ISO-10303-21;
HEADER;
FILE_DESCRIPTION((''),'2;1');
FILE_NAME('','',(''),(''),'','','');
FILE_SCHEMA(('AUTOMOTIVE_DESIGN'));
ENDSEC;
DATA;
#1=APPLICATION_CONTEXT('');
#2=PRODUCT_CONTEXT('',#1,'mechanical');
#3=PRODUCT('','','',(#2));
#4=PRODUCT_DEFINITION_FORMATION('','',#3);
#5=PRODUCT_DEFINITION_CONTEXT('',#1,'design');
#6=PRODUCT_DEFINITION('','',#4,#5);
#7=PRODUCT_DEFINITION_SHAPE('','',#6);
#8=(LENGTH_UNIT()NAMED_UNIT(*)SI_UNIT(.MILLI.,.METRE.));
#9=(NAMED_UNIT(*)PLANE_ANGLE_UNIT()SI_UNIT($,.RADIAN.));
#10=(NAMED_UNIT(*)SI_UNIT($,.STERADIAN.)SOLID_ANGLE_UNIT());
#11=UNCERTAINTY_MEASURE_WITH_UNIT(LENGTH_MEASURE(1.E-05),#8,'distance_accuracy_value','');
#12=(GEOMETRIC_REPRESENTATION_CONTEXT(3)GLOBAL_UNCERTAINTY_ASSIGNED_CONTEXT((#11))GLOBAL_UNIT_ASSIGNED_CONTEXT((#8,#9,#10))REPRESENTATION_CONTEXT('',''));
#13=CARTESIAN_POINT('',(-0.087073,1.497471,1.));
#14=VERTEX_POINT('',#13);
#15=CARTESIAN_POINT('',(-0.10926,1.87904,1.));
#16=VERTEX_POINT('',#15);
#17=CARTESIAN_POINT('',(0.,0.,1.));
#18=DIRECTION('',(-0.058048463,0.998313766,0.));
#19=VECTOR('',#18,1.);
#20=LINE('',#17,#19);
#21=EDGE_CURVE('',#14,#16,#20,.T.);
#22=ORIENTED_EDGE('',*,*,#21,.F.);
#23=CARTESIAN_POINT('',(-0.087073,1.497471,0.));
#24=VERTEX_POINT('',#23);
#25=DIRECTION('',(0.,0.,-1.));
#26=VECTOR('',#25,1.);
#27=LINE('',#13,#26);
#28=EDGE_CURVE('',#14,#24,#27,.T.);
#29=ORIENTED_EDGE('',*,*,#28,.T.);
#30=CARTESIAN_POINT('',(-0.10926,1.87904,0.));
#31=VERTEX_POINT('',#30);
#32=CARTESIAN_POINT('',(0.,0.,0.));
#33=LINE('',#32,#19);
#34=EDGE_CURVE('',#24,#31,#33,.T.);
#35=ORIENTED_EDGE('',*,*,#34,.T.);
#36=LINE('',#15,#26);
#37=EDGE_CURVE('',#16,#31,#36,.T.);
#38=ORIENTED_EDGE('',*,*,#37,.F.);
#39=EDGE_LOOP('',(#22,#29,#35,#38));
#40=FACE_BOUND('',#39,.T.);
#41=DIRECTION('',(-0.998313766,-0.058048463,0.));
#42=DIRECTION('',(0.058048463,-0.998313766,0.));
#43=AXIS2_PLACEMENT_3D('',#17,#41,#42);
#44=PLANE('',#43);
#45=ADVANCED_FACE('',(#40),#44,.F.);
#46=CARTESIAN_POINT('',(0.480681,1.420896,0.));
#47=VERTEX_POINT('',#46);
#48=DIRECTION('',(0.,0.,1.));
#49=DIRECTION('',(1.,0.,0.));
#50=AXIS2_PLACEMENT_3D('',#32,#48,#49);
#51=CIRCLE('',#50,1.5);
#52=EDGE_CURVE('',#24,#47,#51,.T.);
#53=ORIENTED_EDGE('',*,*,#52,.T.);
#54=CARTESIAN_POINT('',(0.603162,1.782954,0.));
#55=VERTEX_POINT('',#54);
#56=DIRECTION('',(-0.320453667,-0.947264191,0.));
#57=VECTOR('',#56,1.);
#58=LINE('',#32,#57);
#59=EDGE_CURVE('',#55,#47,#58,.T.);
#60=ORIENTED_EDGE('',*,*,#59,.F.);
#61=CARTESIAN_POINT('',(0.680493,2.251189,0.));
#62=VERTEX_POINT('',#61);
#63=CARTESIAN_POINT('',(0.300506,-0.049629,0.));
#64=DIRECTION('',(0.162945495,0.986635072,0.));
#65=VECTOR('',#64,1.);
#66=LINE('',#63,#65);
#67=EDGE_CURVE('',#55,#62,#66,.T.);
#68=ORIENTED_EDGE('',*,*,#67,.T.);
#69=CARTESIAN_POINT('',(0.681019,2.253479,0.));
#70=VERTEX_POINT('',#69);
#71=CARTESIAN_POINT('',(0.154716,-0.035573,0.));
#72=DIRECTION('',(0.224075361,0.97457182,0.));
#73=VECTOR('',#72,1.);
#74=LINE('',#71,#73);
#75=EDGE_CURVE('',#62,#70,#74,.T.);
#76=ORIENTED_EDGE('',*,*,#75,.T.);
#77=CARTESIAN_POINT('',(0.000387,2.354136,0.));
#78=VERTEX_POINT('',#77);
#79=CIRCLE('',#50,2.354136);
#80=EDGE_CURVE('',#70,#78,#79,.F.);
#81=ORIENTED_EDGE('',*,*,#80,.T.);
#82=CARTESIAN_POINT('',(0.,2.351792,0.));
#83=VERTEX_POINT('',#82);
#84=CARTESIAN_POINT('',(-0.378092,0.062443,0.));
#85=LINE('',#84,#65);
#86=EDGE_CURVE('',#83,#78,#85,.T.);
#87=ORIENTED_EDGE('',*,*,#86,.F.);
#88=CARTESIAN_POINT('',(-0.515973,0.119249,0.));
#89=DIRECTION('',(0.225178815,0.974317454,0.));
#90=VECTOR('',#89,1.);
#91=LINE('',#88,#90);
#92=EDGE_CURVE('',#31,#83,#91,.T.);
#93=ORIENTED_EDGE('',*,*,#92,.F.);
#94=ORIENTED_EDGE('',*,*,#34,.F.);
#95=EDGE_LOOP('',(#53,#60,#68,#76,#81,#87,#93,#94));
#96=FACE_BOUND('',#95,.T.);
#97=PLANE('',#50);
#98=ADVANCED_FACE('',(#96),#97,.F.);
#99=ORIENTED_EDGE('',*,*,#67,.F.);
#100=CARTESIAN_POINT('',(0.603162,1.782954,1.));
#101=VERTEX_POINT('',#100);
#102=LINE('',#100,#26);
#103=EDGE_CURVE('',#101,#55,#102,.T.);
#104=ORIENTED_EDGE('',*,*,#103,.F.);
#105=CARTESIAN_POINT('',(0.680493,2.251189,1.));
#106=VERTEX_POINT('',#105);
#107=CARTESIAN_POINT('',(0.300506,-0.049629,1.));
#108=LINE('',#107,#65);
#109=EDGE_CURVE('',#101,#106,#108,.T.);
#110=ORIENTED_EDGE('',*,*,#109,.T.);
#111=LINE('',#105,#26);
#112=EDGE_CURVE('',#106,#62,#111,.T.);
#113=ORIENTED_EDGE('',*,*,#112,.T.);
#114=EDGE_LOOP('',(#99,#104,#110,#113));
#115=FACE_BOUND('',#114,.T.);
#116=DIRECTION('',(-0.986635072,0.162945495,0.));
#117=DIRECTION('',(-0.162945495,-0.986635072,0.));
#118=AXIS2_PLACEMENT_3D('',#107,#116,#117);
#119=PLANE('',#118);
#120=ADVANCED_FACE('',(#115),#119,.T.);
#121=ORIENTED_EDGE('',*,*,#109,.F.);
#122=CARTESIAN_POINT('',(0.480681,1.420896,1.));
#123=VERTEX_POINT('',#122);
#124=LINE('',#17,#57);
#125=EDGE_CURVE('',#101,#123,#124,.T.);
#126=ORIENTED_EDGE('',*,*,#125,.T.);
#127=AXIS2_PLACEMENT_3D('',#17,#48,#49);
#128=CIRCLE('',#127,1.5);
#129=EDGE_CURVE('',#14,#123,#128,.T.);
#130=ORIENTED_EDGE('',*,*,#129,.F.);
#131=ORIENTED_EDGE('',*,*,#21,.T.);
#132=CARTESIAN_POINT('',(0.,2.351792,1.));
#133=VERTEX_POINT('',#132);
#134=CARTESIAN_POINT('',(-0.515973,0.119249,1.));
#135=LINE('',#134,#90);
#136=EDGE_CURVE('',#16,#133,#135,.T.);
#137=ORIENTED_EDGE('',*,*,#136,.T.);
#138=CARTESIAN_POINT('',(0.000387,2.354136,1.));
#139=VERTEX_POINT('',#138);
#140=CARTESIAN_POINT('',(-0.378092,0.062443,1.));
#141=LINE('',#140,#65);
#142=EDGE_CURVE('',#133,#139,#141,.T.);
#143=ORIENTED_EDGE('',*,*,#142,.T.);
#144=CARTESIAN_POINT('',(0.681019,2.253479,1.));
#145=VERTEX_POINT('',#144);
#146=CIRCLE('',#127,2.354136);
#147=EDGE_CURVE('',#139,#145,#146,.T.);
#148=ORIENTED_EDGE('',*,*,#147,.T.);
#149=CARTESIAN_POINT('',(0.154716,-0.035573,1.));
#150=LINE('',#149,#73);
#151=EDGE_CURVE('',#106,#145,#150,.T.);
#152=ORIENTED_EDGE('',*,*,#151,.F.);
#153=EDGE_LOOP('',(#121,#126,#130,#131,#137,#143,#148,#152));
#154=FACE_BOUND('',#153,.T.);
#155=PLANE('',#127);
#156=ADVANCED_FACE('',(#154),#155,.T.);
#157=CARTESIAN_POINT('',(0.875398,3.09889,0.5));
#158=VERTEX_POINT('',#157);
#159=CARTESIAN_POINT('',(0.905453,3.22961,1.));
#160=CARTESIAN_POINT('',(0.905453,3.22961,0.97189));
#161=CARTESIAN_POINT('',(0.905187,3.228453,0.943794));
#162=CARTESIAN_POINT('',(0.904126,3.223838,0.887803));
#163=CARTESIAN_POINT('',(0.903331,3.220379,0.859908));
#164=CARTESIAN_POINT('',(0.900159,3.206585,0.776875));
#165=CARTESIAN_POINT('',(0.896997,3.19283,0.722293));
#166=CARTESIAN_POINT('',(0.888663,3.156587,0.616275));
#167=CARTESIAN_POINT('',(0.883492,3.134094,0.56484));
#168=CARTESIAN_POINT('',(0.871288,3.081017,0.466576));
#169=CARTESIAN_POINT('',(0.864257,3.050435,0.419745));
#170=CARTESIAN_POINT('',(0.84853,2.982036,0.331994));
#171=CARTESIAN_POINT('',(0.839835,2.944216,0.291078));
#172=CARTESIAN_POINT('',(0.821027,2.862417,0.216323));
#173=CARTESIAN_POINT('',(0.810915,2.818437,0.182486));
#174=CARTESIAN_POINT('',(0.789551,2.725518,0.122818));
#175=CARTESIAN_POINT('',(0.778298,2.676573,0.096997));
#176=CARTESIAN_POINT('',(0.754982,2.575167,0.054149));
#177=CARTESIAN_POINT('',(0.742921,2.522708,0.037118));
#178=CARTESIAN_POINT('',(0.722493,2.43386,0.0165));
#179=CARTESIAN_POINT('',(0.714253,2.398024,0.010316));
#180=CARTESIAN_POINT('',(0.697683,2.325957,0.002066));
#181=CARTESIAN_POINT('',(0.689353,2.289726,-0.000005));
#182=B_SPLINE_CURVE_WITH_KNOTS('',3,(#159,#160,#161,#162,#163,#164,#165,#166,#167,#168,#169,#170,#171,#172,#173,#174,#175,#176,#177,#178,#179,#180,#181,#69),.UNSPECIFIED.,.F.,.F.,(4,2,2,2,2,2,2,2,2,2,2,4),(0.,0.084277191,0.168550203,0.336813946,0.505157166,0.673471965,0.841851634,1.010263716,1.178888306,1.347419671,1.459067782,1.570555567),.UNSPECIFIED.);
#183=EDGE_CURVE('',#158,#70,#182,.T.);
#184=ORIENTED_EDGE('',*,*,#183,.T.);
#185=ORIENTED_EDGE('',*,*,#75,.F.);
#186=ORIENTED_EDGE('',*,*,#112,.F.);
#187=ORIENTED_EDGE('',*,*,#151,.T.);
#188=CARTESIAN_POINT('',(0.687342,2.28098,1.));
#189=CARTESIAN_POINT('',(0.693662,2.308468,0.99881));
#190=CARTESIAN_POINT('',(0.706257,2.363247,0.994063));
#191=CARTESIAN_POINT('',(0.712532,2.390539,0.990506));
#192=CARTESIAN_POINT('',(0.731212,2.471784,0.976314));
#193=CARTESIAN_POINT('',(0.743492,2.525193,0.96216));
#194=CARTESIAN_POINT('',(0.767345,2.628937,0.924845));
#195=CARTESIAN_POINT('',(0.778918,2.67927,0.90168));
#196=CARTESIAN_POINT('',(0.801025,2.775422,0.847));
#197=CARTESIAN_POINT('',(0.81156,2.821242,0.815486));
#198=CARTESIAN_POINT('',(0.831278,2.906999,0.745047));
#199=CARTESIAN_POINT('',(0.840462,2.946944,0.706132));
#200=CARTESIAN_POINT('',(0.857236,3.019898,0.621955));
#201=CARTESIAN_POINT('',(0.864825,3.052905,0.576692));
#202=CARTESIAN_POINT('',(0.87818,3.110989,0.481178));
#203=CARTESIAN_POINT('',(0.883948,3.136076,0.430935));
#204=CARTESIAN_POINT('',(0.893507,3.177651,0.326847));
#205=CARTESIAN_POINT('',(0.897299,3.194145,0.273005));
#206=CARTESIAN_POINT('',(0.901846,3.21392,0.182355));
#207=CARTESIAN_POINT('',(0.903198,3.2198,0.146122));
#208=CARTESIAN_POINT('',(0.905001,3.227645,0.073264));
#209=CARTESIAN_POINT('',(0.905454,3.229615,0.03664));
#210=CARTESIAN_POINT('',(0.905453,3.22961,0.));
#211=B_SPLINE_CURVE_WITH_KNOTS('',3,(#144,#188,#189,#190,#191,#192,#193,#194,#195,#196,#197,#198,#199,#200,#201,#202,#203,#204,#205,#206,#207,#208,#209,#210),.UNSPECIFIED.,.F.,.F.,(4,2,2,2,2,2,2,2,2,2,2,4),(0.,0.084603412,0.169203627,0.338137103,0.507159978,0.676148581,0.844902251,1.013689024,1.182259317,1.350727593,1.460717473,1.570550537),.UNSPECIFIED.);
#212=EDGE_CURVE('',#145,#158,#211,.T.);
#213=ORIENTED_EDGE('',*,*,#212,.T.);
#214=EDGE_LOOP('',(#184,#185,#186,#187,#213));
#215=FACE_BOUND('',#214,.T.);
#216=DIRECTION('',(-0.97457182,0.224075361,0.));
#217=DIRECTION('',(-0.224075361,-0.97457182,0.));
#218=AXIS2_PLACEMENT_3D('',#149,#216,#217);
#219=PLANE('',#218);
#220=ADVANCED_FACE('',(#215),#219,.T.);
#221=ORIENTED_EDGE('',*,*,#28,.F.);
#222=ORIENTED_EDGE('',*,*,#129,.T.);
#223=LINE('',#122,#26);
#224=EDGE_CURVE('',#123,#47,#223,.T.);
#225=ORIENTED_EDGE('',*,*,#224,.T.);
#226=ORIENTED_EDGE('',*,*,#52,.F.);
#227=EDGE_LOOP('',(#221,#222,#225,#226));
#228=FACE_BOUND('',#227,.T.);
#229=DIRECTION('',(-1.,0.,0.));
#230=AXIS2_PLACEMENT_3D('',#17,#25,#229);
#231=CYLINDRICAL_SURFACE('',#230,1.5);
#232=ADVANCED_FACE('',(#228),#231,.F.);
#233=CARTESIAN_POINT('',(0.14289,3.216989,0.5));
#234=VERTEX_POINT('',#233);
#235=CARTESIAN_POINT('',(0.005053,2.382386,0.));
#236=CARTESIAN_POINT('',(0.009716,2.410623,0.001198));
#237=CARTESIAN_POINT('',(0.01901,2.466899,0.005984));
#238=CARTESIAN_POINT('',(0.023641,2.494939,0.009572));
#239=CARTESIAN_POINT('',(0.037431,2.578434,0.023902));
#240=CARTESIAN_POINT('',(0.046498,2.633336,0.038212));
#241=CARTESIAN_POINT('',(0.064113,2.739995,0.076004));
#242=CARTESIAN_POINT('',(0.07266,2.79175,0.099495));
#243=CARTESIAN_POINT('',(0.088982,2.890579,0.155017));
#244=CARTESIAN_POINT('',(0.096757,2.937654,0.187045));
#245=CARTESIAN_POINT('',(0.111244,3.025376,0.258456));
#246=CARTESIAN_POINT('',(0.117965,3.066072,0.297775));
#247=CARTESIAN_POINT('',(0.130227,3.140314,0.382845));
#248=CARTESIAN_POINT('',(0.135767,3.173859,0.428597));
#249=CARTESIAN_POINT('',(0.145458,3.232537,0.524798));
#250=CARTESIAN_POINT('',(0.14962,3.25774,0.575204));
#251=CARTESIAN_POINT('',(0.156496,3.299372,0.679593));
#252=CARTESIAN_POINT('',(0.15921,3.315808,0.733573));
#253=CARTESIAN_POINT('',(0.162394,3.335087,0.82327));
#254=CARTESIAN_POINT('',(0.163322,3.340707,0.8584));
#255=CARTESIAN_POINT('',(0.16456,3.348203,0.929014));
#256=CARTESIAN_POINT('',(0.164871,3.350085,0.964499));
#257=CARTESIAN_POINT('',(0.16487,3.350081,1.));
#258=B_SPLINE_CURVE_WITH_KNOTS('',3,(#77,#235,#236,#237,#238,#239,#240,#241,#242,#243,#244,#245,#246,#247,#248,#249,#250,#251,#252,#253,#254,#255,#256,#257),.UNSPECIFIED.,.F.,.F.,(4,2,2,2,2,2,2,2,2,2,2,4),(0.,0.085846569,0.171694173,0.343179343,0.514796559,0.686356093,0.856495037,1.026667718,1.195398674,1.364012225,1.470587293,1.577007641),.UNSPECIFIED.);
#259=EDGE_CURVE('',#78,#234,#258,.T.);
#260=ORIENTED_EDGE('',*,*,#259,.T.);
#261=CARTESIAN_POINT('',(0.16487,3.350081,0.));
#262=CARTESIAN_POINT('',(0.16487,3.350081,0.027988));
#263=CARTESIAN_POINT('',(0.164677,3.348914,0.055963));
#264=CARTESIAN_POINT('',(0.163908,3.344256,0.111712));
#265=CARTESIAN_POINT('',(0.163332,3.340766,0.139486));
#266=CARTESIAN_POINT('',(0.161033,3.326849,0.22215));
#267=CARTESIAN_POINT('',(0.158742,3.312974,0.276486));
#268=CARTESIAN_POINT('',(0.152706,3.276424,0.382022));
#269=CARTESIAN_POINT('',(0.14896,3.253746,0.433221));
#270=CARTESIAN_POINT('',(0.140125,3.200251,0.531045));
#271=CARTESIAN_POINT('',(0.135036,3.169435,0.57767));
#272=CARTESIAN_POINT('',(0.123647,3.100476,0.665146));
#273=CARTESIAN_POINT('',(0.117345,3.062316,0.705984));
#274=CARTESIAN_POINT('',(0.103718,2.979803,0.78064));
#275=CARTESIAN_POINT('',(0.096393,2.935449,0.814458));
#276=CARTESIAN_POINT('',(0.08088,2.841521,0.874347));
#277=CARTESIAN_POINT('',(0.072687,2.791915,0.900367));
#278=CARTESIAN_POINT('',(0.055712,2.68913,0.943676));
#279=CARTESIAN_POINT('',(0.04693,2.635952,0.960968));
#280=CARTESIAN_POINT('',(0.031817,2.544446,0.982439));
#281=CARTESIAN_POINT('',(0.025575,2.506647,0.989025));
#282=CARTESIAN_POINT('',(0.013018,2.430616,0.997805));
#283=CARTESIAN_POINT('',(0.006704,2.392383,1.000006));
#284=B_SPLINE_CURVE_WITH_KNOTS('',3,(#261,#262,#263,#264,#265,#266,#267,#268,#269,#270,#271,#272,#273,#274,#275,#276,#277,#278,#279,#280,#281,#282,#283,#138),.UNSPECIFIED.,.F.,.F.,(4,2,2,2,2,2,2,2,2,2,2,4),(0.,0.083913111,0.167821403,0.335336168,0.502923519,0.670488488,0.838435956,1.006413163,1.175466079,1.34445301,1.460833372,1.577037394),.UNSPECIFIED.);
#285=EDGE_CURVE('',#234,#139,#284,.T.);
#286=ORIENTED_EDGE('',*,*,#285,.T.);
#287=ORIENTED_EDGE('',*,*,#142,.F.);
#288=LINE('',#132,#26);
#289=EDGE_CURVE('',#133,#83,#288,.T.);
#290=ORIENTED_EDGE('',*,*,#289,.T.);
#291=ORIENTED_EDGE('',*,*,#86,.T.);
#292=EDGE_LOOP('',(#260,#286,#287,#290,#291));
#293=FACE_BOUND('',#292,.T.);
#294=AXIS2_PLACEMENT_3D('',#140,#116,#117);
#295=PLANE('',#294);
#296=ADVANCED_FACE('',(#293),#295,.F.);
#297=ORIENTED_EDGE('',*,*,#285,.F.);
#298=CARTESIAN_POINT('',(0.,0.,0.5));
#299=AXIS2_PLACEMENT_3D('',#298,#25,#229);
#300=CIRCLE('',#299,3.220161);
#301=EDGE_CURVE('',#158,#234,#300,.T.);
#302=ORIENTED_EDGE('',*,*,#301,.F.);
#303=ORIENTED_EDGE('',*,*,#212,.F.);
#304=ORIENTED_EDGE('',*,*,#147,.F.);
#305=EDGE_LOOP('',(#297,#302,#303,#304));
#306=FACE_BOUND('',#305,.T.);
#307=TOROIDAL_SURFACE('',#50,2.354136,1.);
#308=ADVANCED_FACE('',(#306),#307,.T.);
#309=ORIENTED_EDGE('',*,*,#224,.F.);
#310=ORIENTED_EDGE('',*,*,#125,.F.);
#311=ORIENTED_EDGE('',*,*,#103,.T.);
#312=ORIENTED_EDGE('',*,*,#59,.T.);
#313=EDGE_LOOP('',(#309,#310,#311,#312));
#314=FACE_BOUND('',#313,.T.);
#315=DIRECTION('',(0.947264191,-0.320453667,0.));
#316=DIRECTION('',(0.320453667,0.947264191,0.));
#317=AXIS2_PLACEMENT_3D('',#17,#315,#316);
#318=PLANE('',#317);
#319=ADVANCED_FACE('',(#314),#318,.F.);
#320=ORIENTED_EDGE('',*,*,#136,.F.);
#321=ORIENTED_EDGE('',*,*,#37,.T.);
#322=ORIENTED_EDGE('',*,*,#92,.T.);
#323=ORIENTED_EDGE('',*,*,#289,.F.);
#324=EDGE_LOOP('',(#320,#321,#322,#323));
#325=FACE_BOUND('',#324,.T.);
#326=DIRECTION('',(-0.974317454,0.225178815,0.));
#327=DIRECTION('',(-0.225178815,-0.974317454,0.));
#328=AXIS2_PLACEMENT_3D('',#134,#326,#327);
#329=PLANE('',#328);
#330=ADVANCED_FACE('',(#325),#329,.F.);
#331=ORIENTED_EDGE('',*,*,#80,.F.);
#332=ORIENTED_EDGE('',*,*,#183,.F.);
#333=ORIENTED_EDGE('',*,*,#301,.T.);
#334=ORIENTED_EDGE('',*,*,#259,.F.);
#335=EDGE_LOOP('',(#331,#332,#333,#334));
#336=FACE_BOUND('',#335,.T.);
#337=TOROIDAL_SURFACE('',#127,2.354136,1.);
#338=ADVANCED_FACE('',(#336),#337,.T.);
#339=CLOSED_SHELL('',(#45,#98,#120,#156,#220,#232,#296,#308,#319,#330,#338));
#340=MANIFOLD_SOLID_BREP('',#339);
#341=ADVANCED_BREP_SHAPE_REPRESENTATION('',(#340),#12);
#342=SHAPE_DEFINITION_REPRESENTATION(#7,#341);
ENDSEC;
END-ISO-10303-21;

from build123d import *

# Parameters (mm, degrees)
EXTRUDE_1_DEPTH = 1
FILLET_4_R      = 1


with BuildPart() as part:
    # Эскиз1 → Бобышка-Вытянуть1 (new body)
    with BuildSketch(Plane.XY):
        with BuildLine():
            ThreePointArc((0.480680501, 1.420896286), (-0.200493603, -1.486540385), (-0.087072694, 1.497470649))
            Line((-0.087072694, 1.497470649), (-0.109259646, 1.879040442))
            Line((-0.109259646, 1.879040442), (0, 2.351791755))
            Line((0, 2.351791755), (0.164870261, 3.350081286))
            ThreePointArc((0.164870261, 3.350081286), (-2.42932337, -2.312707243), (3.35413578, 0))
            ThreePointArc((3.35413578, 0), (2.672755085, 2.02647652), (0.905453106, 3.229610116))
            Line((0.905453106, 3.229610116), (0.680492814, 2.251189461))
            Line((0.680492814, 2.251189461), (0.603162473, 1.782954201))
            Line((0.603162473, 1.782954201), (0.480680501, 1.420896286))
        make_face()
    extrude(amount=EXTRUDE_1_DEPTH)

    # Скругление4
    # the kernel refuses this fillet: 1 mm, written as the material it takes off along each edge
    with BuildSketch(Plane(origin=(0, 0, 0), x_dir=(0.7154585418430487, 0.6986551902790236, 0), z_dir=(0.6986551902790236, -0.7154585418430487, 0))) as fillet_4_piece_1:
        with BuildLine():
            CenterArc((3.35413578 - FILLET_4_R, FILLET_4_R), FILLET_4_R, 270, 90)
            Line((3.35413578 - FILLET_4_R, 0), (3.35413578, 0))
            Line((3.35413578, 0), (3.35413578, FILLET_4_R))
        make_face()
    revolve(axis=Axis((0, 0, 0), (0, 0, 1)), revolution_arc=315.68079094, mode=Mode.SUBTRACT)
    with BuildSketch(Plane(origin=(0, 0, 1), x_dir=(0.7154585418430487, 0.6986551902790236, 0), z_dir=(0.6986551902790236, -0.7154585418430487, 0))) as fillet_4_piece_2:
        with BuildLine():
            CenterArc((3.35413578 - FILLET_4_R, -FILLET_4_R), FILLET_4_R, 0, 90)
            Line((3.35413578 - FILLET_4_R, 0), (3.35413578, 0))
            Line((3.35413578, 0), (3.35413578, -FILLET_4_R))
        make_face()
    revolve(axis=Axis((0, 0, 1), (0, 0, 1)), revolution_arc=315.68079094, mode=Mode.SUBTRACT)
    with BuildSketch(Plane(origin=(0, 0, 1), x_dir=(1, 0, 0), z_dir=(0, -1, 0))) as fillet_4_piece_3:
        with BuildLine():
            CenterArc((3.35413578 - FILLET_4_R, -FILLET_4_R), FILLET_4_R, 0, 90)
            Line((3.35413578 - FILLET_4_R, 0), (3.35413578, 0))
            Line((3.35413578, 0), (3.35413578, -FILLET_4_R))
        make_face()
    revolve(axis=Axis((0, 0, 1), (0, 0, 1)), revolution_arc=117.055659858, mode=Mode.SUBTRACT)
    with BuildSketch(Plane(origin=(0, 0, 0), x_dir=(1, 0, 0), z_dir=(0, -1, 0))) as fillet_4_piece_4:
        with BuildLine():
            CenterArc((3.35413578 - FILLET_4_R, FILLET_4_R), FILLET_4_R, 270, 90)
            Line((3.35413578 - FILLET_4_R, 0), (3.35413578, 0))
            Line((3.35413578, 0), (3.35413578, FILLET_4_R))
        make_face()
    revolve(axis=Axis((0, 0, 0), (0, 0, 1)), revolution_arc=117.055659858, mode=Mode.SUBTRACT)


solid = part.part
